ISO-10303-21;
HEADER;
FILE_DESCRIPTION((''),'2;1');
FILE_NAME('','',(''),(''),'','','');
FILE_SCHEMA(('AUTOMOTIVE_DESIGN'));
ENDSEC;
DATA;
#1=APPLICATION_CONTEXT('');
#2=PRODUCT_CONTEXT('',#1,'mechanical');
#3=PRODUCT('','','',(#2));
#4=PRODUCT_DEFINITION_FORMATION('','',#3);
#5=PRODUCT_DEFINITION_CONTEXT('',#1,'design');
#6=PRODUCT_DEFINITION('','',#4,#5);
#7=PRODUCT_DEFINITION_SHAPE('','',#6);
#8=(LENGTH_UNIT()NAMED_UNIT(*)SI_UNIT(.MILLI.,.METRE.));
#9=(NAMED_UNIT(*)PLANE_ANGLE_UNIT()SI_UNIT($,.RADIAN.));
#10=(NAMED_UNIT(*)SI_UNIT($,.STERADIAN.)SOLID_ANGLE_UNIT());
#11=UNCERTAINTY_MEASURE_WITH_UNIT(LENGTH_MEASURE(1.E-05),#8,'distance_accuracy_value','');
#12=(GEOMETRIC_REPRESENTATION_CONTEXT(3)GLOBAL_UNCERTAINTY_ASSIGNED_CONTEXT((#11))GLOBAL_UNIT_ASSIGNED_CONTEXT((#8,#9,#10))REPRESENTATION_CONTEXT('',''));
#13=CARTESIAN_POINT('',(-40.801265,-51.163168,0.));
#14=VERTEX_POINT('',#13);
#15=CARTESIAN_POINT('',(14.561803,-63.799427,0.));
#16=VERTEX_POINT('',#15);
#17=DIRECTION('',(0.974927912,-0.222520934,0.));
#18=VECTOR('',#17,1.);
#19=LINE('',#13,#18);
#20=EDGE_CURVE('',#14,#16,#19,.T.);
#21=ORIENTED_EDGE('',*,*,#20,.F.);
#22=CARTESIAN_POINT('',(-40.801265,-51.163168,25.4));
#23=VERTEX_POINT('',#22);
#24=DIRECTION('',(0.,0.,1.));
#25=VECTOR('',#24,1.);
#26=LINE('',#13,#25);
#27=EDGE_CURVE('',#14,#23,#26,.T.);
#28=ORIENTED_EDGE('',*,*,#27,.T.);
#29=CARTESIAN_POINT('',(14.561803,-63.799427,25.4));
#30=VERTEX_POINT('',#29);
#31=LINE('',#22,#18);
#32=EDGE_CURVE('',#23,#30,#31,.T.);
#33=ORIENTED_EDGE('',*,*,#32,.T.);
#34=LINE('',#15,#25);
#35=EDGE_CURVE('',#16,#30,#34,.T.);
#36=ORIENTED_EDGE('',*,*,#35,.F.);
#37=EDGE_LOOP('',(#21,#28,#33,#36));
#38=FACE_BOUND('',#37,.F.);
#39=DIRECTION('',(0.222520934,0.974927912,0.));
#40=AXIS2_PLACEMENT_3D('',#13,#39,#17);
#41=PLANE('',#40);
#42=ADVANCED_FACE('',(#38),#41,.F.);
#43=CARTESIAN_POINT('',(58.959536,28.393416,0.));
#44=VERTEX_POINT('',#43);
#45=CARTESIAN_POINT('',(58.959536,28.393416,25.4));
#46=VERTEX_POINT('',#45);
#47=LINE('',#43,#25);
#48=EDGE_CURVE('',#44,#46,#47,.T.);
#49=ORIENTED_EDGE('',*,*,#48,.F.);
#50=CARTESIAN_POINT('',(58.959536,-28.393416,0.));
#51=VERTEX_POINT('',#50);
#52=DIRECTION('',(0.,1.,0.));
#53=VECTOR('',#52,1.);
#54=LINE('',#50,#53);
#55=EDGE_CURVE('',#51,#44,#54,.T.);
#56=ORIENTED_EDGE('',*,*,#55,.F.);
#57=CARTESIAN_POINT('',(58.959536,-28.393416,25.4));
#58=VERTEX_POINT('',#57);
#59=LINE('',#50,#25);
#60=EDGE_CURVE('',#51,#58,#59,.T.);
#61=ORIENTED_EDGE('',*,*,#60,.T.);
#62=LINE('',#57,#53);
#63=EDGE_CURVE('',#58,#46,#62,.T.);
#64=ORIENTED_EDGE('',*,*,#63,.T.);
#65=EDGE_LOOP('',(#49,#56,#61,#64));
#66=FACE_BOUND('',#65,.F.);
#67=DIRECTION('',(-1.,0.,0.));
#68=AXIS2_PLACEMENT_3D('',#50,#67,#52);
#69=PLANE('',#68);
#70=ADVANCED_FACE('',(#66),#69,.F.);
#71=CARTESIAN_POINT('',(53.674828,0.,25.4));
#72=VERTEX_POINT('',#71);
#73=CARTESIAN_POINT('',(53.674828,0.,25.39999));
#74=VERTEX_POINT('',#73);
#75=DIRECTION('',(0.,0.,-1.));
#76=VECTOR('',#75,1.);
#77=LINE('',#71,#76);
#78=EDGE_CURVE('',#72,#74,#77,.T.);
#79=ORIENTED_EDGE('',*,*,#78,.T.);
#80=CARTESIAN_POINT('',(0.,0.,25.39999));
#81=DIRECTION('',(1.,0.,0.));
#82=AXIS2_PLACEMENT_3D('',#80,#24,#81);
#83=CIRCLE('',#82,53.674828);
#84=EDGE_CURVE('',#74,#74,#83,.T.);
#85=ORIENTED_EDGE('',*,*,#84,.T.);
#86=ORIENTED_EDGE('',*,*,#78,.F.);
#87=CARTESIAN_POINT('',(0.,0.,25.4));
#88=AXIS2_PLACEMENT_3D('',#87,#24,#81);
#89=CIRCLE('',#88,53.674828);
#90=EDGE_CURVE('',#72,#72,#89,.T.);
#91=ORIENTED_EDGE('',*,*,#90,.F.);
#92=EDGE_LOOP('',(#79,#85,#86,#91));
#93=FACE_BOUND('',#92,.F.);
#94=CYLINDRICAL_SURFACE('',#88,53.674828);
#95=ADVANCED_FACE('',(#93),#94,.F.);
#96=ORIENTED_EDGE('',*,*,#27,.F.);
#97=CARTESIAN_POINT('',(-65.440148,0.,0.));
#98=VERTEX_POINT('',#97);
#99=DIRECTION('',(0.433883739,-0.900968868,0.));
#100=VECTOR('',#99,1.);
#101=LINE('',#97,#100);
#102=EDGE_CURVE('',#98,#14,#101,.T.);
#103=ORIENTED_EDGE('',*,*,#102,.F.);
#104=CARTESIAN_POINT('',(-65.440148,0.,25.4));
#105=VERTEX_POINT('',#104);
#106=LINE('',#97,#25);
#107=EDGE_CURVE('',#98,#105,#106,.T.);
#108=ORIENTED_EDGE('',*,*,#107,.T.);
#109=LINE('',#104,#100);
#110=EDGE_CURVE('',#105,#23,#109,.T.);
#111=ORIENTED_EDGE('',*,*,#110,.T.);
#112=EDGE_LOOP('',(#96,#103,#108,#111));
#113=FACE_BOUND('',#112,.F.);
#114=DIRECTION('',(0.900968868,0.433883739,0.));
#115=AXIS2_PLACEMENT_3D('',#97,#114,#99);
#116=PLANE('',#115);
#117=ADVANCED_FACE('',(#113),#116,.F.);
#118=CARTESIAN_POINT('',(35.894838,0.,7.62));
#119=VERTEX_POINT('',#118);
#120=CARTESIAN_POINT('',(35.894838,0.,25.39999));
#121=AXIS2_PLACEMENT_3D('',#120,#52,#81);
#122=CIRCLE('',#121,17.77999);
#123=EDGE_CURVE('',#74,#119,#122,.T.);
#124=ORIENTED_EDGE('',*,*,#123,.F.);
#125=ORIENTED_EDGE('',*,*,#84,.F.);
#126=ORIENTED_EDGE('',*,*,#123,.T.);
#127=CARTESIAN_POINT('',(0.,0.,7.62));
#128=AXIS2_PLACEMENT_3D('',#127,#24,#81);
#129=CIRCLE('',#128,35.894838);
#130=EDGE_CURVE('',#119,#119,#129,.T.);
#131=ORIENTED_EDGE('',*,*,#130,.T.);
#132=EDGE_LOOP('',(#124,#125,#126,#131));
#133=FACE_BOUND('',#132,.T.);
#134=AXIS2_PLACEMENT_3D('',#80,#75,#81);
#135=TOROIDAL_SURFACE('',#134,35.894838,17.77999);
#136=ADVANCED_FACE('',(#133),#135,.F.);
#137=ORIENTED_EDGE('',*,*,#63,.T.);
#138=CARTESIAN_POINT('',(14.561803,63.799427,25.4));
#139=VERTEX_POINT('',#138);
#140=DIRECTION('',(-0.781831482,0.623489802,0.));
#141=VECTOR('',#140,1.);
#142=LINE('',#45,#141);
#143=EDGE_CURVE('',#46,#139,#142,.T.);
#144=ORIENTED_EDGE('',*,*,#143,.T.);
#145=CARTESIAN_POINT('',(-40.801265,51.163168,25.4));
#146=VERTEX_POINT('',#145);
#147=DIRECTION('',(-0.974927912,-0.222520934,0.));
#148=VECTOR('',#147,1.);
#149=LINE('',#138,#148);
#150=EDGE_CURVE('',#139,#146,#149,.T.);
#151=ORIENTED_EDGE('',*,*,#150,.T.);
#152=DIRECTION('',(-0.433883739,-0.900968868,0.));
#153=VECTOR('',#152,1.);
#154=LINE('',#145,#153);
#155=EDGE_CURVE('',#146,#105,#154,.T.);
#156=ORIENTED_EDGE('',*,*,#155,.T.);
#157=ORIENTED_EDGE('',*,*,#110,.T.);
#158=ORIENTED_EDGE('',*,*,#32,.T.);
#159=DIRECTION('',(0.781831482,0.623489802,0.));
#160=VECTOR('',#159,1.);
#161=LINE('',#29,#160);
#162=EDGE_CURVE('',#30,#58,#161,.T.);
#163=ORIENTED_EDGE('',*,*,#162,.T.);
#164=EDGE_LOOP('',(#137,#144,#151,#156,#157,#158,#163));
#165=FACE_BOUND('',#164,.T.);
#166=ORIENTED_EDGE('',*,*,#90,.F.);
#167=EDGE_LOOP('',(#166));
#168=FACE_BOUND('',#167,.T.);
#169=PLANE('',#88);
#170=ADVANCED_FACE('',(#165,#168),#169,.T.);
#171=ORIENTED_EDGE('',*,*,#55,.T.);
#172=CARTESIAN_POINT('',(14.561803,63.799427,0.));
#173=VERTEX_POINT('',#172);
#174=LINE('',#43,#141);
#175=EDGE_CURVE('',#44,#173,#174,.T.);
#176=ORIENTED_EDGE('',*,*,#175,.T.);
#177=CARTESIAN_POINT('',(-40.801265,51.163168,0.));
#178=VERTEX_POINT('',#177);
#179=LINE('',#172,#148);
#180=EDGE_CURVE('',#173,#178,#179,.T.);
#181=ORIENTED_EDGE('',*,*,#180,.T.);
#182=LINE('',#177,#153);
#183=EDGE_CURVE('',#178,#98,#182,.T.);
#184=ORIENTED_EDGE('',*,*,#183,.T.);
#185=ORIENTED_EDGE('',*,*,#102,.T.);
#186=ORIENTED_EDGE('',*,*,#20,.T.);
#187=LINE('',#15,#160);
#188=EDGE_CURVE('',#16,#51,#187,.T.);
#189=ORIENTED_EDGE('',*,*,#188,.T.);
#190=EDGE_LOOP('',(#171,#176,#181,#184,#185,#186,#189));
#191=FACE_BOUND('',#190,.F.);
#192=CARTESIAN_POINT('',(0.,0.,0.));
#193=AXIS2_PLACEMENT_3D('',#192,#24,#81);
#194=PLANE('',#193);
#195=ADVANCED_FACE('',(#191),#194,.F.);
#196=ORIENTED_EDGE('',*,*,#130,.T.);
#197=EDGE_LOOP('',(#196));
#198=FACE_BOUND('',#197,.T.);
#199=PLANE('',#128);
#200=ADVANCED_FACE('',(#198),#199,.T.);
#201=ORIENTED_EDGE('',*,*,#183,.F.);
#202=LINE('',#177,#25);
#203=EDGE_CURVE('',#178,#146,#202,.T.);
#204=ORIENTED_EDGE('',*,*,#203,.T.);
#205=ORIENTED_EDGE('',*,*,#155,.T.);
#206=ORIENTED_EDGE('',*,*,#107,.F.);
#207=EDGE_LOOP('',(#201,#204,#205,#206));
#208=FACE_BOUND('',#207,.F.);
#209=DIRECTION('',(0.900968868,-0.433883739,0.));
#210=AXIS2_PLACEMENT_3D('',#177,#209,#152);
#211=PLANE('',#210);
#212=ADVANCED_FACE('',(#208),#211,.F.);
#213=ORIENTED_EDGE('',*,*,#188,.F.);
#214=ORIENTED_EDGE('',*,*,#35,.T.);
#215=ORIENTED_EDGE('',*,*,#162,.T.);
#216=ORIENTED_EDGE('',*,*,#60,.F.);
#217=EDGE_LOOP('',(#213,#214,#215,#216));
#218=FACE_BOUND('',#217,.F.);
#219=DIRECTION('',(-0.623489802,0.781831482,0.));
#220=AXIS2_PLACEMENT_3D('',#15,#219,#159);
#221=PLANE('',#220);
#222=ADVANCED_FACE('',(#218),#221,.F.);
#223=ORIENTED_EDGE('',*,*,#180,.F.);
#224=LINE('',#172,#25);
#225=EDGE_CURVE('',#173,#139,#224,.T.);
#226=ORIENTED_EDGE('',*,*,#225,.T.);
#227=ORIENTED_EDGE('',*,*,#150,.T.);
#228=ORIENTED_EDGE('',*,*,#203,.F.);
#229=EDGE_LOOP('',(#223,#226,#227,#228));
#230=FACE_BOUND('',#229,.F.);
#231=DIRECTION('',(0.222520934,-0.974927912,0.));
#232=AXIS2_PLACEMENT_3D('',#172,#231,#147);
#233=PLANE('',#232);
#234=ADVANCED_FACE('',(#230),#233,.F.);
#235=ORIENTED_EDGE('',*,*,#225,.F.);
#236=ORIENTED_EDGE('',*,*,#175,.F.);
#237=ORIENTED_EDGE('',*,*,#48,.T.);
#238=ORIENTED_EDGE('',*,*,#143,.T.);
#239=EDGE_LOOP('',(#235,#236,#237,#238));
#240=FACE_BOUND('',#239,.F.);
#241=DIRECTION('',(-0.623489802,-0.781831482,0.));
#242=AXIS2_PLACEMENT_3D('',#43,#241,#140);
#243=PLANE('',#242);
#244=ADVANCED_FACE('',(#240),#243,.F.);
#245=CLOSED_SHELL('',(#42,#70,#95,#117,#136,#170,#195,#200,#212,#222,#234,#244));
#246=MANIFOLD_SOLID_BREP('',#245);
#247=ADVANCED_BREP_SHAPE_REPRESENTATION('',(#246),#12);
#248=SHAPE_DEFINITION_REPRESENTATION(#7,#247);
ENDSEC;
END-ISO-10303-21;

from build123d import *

# Parameters (mm, degrees)
F1_DEPTH = 25.4
F2_R     = 53.6748278482
F3_DEPTH = 17.78
F4_R     = 17.77999


# Not quite as in the source:
# - a fillet or chamfer is up to 0.001 mm smaller than in the source, because OpenCascade refuses the exact size


with BuildPart() as f1:
    # F0 (on Top) → F1 (new body)
    with BuildSketch(Plane.XY):
        Polygon((58.9595362544, -28.3934161968), (58.9595362544, 28.3934161968), (14.5618028995, 63.799427074), (-40.8012650454, 51.1631680934), (-65.440148217, 0), (-40.8012650454, -51.1631680934), (14.5618028995, -63.799427074), align=None)
    extrude(amount=F1_DEPTH)

    # F2 (on face) → F3 (cut)
    with BuildSketch(Plane.XY.offset(25.4)):
        Circle(F2_R)
    extrude(amount=-F3_DEPTH, mode=Mode.SUBTRACT)

    # F4 (radius 17.78 in the source; OpenCascade refuses exactly that, so slightly less here)
    f4_edges = [f1.edges().sort_by_distance(p)[0] for p in [
        (-53.674828, 0, 7.62),
    ]]
    fillet(f4_edges, radius=F4_R)


solid = f1.part
